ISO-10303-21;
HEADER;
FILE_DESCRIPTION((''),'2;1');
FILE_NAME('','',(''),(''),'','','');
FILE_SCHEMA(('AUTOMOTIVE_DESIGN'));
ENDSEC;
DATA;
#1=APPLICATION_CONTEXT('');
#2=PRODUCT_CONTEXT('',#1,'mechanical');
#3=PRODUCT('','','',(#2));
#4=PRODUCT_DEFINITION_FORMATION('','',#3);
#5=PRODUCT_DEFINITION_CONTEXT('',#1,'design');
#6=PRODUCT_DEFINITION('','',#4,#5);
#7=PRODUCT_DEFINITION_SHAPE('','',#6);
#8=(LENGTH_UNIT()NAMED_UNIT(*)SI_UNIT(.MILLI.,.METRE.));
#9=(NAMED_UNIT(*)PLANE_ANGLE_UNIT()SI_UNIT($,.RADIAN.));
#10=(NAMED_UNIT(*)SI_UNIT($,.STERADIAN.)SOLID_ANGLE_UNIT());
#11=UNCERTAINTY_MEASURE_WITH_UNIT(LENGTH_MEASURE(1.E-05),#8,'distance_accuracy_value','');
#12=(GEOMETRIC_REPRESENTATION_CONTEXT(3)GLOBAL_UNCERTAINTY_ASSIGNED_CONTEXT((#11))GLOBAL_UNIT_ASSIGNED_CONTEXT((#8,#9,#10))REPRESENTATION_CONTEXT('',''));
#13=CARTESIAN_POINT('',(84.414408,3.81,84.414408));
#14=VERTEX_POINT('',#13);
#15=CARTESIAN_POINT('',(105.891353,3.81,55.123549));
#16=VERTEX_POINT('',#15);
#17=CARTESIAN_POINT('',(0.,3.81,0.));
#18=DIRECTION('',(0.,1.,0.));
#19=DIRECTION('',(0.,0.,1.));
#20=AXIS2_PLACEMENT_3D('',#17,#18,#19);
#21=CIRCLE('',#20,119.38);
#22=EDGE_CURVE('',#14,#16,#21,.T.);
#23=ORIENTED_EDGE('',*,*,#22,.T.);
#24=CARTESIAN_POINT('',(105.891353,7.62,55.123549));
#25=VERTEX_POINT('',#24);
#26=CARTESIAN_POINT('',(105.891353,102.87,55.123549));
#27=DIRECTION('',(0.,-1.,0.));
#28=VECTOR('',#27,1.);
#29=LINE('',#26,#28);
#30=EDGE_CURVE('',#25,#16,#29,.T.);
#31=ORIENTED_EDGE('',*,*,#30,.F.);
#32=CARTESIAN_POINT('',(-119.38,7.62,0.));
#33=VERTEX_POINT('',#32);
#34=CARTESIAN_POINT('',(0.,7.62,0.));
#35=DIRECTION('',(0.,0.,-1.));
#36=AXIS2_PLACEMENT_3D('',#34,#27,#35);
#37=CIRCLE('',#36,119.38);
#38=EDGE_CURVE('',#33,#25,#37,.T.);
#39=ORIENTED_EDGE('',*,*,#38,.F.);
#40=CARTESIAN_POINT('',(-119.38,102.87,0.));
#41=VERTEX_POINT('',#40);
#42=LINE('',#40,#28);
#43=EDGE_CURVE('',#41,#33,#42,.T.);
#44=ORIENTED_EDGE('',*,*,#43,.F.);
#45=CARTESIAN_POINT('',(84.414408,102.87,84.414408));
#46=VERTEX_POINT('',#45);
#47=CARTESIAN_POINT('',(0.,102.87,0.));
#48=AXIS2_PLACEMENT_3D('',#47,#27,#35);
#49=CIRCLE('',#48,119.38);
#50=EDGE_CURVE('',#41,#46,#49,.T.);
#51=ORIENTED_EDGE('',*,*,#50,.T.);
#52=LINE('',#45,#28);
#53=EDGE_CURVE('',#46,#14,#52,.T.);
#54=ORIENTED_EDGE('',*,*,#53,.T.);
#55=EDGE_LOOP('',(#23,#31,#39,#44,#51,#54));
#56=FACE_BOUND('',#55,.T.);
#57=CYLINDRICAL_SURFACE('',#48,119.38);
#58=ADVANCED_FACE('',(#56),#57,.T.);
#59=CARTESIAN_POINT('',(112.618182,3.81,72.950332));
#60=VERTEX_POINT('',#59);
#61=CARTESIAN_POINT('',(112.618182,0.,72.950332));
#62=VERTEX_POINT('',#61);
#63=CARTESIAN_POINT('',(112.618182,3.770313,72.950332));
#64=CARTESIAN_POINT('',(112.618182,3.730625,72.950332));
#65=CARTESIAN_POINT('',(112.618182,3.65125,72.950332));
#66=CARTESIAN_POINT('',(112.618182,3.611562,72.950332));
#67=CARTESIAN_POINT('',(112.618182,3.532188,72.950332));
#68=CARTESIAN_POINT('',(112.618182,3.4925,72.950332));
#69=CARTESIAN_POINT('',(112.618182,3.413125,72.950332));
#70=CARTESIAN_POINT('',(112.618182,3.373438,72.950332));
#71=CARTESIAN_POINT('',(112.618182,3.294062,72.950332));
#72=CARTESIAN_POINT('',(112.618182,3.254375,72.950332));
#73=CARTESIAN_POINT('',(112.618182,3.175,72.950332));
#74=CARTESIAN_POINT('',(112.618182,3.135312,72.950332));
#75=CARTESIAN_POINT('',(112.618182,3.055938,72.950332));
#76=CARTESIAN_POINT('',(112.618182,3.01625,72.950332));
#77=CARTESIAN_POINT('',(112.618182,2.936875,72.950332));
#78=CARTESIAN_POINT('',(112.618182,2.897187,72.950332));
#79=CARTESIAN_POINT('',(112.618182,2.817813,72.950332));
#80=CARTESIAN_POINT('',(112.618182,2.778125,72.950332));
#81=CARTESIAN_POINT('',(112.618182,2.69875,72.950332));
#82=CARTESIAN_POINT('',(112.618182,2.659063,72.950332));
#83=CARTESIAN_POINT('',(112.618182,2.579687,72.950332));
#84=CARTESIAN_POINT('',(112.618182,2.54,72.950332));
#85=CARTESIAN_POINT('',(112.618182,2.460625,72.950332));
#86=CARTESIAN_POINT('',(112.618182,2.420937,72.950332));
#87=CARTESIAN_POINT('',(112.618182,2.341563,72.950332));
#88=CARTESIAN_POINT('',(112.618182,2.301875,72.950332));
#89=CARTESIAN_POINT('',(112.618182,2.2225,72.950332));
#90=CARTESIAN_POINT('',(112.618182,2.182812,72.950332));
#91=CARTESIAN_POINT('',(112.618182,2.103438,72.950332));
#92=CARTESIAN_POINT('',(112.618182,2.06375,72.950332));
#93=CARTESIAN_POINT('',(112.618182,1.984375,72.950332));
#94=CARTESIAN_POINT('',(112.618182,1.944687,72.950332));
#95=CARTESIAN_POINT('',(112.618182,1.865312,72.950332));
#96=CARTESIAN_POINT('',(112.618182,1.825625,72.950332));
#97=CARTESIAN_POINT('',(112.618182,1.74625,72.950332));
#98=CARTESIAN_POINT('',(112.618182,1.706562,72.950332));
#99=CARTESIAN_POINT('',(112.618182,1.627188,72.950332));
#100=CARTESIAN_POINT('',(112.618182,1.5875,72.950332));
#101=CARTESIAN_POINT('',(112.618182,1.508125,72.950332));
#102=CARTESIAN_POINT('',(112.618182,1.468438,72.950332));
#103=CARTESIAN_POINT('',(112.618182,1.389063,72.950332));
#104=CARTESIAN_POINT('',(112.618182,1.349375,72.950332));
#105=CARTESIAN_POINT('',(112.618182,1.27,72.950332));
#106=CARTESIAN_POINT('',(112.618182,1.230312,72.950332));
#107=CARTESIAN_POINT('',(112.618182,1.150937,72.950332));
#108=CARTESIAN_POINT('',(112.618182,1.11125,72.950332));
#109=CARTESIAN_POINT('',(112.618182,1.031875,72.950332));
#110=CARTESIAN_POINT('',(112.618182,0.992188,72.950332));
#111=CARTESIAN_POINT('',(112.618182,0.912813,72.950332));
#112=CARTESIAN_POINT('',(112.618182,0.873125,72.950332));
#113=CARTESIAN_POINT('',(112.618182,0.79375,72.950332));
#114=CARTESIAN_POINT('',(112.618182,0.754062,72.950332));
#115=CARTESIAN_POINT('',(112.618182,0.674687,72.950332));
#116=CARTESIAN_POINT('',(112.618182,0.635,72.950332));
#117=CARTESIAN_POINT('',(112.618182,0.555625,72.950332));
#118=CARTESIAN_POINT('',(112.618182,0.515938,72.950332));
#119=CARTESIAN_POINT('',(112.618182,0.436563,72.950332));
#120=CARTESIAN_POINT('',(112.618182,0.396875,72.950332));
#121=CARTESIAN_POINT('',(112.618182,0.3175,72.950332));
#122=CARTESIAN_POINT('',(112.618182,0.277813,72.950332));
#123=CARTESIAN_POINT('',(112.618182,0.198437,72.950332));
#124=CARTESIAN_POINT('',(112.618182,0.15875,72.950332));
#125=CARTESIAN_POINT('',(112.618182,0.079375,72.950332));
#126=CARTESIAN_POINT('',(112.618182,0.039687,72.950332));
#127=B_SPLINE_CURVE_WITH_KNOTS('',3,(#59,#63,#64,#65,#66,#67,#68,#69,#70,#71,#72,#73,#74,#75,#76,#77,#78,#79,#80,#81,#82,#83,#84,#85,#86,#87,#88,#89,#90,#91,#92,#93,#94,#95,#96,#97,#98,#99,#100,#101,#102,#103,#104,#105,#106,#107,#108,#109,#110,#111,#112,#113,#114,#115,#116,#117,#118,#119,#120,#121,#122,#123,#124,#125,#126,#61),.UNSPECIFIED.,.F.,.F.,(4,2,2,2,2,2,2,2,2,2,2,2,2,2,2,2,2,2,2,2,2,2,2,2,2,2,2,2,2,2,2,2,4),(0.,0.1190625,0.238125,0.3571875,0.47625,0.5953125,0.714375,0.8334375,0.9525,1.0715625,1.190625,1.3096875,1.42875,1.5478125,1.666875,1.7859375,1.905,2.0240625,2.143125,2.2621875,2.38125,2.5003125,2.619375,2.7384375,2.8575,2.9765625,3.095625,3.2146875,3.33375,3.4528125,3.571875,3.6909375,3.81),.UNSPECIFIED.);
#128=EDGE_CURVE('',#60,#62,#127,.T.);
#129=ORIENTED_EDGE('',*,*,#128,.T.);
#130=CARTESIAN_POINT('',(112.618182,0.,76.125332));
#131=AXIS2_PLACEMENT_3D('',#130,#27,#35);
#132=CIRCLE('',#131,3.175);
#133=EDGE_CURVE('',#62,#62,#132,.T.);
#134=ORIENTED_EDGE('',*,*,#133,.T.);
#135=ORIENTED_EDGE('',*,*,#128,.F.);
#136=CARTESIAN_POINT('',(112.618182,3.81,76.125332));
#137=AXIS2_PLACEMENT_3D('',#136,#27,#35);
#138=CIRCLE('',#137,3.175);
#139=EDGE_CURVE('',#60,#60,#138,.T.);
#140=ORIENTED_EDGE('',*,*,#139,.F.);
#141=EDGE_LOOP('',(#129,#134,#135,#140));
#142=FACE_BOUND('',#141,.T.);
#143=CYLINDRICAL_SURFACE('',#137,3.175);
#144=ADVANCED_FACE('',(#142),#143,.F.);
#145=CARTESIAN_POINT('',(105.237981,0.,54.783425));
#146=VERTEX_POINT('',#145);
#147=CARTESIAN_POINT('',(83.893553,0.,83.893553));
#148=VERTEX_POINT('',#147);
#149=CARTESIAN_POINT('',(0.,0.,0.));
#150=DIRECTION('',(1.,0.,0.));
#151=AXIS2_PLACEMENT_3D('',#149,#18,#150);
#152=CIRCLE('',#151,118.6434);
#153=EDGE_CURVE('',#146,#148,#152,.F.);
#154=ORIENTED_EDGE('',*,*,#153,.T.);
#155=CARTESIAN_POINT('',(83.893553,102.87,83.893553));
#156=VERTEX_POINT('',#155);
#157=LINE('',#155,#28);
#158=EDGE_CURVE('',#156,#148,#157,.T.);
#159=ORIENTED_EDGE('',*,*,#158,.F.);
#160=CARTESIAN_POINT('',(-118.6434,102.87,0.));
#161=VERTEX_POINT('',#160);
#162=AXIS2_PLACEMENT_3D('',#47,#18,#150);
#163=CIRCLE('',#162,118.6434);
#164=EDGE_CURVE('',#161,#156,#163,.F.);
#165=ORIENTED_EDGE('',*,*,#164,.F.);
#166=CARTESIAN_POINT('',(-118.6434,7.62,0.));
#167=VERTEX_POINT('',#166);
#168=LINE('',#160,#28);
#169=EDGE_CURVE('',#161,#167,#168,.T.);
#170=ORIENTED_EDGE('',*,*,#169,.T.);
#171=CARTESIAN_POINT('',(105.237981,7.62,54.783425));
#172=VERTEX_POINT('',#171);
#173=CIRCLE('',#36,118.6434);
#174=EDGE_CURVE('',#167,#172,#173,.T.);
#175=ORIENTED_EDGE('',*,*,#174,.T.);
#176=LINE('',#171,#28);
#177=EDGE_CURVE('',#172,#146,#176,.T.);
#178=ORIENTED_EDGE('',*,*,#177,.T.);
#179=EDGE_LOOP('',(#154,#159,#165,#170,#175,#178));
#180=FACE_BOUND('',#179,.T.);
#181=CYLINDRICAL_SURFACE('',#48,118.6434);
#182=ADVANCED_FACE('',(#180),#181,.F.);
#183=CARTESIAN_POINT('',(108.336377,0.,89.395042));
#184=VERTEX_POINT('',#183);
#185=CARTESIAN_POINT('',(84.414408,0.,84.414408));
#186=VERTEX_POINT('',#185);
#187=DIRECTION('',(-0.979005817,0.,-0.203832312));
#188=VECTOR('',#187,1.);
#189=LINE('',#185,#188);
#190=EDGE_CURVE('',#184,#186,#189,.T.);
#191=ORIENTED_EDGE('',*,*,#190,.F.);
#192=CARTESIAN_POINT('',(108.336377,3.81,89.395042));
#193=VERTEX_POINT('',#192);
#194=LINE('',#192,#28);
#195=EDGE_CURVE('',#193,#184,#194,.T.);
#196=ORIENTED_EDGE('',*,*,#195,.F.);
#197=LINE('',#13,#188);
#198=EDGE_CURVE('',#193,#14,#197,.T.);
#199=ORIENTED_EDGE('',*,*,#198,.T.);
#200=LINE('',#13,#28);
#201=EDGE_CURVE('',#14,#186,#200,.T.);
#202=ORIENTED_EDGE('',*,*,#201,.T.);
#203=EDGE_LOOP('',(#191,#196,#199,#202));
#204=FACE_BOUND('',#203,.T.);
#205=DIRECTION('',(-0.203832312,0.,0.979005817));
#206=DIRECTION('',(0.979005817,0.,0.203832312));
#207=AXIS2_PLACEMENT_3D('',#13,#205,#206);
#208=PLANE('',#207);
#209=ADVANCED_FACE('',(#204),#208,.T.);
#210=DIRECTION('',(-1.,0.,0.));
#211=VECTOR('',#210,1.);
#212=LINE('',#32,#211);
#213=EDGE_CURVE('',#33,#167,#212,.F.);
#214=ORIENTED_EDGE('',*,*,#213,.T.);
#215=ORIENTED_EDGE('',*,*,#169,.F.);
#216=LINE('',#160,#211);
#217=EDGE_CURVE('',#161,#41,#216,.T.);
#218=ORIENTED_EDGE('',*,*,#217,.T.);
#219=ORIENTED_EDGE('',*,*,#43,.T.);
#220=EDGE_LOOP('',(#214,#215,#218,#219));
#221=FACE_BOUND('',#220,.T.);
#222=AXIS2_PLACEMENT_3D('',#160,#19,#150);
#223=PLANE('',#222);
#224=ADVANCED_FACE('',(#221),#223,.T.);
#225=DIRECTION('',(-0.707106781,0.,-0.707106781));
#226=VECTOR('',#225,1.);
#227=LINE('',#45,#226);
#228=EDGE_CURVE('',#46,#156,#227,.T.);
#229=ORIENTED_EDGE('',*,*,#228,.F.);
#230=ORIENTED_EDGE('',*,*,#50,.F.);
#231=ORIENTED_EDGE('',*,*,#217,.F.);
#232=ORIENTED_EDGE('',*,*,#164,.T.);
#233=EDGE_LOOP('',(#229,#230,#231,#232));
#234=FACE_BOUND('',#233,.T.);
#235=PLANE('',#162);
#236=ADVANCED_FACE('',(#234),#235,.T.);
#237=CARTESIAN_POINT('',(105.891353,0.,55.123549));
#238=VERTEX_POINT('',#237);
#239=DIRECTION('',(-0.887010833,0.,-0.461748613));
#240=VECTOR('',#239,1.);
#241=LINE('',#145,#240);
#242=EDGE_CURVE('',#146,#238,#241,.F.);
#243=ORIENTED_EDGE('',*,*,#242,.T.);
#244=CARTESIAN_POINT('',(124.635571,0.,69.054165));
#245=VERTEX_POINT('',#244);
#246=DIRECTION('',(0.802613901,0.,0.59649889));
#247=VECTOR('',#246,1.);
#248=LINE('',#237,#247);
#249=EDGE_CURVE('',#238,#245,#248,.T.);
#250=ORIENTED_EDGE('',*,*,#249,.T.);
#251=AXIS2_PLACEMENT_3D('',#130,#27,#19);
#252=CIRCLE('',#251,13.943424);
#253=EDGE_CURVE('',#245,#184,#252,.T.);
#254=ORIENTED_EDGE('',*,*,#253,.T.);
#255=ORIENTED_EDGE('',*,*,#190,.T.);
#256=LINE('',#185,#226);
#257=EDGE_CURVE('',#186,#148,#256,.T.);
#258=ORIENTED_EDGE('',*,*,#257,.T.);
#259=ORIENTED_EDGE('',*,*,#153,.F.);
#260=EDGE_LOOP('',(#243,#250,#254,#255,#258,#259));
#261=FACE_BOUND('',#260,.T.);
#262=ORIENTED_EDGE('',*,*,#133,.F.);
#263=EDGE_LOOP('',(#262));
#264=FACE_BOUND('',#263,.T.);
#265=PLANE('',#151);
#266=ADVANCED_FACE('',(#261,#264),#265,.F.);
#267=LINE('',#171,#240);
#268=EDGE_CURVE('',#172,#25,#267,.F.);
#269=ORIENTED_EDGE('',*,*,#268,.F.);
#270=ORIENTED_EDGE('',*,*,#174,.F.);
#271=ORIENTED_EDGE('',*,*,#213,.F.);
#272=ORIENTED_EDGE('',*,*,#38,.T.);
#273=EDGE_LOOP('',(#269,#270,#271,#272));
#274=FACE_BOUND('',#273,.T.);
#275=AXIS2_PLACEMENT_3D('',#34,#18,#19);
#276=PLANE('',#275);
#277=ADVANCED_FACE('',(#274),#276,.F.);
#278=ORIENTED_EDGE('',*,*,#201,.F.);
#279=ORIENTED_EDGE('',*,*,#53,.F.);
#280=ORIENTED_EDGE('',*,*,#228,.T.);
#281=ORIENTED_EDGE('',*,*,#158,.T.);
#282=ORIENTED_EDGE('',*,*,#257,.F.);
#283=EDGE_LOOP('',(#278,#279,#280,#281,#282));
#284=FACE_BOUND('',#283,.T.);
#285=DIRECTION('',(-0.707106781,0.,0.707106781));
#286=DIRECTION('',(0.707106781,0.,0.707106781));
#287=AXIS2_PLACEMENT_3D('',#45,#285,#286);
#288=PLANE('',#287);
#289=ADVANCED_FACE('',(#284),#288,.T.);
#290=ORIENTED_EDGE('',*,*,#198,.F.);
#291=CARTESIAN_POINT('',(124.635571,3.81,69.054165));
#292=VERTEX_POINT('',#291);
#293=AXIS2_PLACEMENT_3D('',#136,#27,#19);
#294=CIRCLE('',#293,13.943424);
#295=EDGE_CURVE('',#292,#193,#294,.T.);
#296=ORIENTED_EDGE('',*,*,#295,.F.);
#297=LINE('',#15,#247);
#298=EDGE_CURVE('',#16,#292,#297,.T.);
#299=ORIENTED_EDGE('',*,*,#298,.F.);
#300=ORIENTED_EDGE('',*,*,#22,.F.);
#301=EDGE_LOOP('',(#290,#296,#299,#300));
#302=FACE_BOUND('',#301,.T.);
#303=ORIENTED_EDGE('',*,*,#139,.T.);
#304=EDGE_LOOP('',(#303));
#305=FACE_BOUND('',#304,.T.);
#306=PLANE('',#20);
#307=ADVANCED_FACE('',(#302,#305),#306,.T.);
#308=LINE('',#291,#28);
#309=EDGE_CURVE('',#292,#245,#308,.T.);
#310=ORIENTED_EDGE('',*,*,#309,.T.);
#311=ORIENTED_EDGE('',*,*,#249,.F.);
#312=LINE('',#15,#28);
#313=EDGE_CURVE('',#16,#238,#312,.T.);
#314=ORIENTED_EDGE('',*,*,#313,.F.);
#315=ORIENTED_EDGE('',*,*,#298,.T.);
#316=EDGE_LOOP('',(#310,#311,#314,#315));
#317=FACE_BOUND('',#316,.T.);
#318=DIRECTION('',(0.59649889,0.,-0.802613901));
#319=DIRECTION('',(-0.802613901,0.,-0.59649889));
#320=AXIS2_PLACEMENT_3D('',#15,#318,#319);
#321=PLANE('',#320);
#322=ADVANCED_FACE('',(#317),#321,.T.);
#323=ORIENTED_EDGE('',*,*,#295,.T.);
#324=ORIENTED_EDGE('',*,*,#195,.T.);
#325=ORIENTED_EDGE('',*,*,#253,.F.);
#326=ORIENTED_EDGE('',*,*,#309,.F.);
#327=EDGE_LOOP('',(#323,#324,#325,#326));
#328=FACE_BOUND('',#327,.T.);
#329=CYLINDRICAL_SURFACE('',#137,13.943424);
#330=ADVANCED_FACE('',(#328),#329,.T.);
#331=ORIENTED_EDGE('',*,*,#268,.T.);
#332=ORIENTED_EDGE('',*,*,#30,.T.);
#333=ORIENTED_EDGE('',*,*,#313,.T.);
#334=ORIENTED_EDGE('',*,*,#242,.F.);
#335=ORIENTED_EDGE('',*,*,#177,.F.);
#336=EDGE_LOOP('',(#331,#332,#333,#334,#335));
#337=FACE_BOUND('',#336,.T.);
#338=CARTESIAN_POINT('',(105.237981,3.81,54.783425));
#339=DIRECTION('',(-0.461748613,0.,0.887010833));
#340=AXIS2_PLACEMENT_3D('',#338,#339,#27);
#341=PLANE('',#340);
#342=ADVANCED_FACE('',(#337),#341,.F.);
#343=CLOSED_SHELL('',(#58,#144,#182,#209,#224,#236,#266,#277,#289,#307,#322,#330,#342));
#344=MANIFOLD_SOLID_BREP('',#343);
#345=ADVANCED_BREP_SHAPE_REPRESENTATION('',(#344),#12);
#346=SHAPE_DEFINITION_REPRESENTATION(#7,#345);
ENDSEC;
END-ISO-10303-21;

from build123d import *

# Parameters (mm, degrees)
BASE_FLANGE1_DEPTH  = 102.87
CUT_EXTRUDE1_START  = -7.62
CUT_EXTRUDE1_DEPTH  = 7.62
SKETCH8_R           = 3.175
BOSS_EXTRUDE1_DEPTH = 3.81


# Read off the part's stored shape, not the designer's step: Cut-Extrude1
# Sheet-metal steps are written as plain solids
with BuildPart() as part:
    # Sketch2 → Base-Flange1 (new body)
    with BuildSketch(Plane(origin=(0, 0, 0), x_dir=(1, 0, 0), z_dir=(0, 1, 0))):
        with BuildLine():
            ThreePointArc((-119.38, 0), (45.684748156, 110.292738591), (84.414407538, -84.414407538))
            Line((84.414407538, -84.414407538), (83.893552683, -83.893552683))
            ThreePointArc((83.893552683, -83.893552683), (45.402863539, 109.612208928), (-118.6434, 0))
            Line((-118.6434, 0), (-119.38, 0))
        make_face()
    extrude(amount=BASE_FLANGE1_DEPTH)

    # Cut-Extrude1 outline → Cut-Extrude1 (cut)
    with BuildSketch(Plane.XZ.offset(CUT_EXTRUDE1_START)):
        with BuildLine():
            ThreePointArc((-119.38, 0), (28.374941826, -115.958816294), (105.891353265, 55.123549448))
            Line((105.891353265, 55.123549448), (105.237981085, 54.783425419))
            ThreePointArc((105.237981085, 54.783425419), (28.199862397, -115.243325726), (-118.6434, 0))
            Line((-118.6434, 0), (-119.38, 0))
        make_face()
    extrude(amount=CUT_EXTRUDE1_DEPTH, mode=Mode.SUBTRACT)

    # Sketch8 → Boss-Extrude1 (add)
    with BuildSketch(Plane.XZ):
        with BuildLine():
            Line((105.891353265, 55.123549448), (124.635571409, 69.054164544))
            ThreePointArc((124.635571409, 69.054164544), (123.499250093, 84.844358217), (108.336377108, 89.39504225))
            Line((108.336377108, 89.39504225), (84.414407538, 84.414407538))
            ThreePointArc((84.414407538, 84.414407538), (96.273356857, 70.590545822), (105.891353265, 55.123549448))
        make_face()
        with Locations(Location((112.618181959, 76.125332112, 0), (0, 0, 270))):
            Circle(SKETCH8_R, mode=Mode.SUBTRACT)
    extrude(amount=-BOSS_EXTRUDE1_DEPTH)


solid = part.part
